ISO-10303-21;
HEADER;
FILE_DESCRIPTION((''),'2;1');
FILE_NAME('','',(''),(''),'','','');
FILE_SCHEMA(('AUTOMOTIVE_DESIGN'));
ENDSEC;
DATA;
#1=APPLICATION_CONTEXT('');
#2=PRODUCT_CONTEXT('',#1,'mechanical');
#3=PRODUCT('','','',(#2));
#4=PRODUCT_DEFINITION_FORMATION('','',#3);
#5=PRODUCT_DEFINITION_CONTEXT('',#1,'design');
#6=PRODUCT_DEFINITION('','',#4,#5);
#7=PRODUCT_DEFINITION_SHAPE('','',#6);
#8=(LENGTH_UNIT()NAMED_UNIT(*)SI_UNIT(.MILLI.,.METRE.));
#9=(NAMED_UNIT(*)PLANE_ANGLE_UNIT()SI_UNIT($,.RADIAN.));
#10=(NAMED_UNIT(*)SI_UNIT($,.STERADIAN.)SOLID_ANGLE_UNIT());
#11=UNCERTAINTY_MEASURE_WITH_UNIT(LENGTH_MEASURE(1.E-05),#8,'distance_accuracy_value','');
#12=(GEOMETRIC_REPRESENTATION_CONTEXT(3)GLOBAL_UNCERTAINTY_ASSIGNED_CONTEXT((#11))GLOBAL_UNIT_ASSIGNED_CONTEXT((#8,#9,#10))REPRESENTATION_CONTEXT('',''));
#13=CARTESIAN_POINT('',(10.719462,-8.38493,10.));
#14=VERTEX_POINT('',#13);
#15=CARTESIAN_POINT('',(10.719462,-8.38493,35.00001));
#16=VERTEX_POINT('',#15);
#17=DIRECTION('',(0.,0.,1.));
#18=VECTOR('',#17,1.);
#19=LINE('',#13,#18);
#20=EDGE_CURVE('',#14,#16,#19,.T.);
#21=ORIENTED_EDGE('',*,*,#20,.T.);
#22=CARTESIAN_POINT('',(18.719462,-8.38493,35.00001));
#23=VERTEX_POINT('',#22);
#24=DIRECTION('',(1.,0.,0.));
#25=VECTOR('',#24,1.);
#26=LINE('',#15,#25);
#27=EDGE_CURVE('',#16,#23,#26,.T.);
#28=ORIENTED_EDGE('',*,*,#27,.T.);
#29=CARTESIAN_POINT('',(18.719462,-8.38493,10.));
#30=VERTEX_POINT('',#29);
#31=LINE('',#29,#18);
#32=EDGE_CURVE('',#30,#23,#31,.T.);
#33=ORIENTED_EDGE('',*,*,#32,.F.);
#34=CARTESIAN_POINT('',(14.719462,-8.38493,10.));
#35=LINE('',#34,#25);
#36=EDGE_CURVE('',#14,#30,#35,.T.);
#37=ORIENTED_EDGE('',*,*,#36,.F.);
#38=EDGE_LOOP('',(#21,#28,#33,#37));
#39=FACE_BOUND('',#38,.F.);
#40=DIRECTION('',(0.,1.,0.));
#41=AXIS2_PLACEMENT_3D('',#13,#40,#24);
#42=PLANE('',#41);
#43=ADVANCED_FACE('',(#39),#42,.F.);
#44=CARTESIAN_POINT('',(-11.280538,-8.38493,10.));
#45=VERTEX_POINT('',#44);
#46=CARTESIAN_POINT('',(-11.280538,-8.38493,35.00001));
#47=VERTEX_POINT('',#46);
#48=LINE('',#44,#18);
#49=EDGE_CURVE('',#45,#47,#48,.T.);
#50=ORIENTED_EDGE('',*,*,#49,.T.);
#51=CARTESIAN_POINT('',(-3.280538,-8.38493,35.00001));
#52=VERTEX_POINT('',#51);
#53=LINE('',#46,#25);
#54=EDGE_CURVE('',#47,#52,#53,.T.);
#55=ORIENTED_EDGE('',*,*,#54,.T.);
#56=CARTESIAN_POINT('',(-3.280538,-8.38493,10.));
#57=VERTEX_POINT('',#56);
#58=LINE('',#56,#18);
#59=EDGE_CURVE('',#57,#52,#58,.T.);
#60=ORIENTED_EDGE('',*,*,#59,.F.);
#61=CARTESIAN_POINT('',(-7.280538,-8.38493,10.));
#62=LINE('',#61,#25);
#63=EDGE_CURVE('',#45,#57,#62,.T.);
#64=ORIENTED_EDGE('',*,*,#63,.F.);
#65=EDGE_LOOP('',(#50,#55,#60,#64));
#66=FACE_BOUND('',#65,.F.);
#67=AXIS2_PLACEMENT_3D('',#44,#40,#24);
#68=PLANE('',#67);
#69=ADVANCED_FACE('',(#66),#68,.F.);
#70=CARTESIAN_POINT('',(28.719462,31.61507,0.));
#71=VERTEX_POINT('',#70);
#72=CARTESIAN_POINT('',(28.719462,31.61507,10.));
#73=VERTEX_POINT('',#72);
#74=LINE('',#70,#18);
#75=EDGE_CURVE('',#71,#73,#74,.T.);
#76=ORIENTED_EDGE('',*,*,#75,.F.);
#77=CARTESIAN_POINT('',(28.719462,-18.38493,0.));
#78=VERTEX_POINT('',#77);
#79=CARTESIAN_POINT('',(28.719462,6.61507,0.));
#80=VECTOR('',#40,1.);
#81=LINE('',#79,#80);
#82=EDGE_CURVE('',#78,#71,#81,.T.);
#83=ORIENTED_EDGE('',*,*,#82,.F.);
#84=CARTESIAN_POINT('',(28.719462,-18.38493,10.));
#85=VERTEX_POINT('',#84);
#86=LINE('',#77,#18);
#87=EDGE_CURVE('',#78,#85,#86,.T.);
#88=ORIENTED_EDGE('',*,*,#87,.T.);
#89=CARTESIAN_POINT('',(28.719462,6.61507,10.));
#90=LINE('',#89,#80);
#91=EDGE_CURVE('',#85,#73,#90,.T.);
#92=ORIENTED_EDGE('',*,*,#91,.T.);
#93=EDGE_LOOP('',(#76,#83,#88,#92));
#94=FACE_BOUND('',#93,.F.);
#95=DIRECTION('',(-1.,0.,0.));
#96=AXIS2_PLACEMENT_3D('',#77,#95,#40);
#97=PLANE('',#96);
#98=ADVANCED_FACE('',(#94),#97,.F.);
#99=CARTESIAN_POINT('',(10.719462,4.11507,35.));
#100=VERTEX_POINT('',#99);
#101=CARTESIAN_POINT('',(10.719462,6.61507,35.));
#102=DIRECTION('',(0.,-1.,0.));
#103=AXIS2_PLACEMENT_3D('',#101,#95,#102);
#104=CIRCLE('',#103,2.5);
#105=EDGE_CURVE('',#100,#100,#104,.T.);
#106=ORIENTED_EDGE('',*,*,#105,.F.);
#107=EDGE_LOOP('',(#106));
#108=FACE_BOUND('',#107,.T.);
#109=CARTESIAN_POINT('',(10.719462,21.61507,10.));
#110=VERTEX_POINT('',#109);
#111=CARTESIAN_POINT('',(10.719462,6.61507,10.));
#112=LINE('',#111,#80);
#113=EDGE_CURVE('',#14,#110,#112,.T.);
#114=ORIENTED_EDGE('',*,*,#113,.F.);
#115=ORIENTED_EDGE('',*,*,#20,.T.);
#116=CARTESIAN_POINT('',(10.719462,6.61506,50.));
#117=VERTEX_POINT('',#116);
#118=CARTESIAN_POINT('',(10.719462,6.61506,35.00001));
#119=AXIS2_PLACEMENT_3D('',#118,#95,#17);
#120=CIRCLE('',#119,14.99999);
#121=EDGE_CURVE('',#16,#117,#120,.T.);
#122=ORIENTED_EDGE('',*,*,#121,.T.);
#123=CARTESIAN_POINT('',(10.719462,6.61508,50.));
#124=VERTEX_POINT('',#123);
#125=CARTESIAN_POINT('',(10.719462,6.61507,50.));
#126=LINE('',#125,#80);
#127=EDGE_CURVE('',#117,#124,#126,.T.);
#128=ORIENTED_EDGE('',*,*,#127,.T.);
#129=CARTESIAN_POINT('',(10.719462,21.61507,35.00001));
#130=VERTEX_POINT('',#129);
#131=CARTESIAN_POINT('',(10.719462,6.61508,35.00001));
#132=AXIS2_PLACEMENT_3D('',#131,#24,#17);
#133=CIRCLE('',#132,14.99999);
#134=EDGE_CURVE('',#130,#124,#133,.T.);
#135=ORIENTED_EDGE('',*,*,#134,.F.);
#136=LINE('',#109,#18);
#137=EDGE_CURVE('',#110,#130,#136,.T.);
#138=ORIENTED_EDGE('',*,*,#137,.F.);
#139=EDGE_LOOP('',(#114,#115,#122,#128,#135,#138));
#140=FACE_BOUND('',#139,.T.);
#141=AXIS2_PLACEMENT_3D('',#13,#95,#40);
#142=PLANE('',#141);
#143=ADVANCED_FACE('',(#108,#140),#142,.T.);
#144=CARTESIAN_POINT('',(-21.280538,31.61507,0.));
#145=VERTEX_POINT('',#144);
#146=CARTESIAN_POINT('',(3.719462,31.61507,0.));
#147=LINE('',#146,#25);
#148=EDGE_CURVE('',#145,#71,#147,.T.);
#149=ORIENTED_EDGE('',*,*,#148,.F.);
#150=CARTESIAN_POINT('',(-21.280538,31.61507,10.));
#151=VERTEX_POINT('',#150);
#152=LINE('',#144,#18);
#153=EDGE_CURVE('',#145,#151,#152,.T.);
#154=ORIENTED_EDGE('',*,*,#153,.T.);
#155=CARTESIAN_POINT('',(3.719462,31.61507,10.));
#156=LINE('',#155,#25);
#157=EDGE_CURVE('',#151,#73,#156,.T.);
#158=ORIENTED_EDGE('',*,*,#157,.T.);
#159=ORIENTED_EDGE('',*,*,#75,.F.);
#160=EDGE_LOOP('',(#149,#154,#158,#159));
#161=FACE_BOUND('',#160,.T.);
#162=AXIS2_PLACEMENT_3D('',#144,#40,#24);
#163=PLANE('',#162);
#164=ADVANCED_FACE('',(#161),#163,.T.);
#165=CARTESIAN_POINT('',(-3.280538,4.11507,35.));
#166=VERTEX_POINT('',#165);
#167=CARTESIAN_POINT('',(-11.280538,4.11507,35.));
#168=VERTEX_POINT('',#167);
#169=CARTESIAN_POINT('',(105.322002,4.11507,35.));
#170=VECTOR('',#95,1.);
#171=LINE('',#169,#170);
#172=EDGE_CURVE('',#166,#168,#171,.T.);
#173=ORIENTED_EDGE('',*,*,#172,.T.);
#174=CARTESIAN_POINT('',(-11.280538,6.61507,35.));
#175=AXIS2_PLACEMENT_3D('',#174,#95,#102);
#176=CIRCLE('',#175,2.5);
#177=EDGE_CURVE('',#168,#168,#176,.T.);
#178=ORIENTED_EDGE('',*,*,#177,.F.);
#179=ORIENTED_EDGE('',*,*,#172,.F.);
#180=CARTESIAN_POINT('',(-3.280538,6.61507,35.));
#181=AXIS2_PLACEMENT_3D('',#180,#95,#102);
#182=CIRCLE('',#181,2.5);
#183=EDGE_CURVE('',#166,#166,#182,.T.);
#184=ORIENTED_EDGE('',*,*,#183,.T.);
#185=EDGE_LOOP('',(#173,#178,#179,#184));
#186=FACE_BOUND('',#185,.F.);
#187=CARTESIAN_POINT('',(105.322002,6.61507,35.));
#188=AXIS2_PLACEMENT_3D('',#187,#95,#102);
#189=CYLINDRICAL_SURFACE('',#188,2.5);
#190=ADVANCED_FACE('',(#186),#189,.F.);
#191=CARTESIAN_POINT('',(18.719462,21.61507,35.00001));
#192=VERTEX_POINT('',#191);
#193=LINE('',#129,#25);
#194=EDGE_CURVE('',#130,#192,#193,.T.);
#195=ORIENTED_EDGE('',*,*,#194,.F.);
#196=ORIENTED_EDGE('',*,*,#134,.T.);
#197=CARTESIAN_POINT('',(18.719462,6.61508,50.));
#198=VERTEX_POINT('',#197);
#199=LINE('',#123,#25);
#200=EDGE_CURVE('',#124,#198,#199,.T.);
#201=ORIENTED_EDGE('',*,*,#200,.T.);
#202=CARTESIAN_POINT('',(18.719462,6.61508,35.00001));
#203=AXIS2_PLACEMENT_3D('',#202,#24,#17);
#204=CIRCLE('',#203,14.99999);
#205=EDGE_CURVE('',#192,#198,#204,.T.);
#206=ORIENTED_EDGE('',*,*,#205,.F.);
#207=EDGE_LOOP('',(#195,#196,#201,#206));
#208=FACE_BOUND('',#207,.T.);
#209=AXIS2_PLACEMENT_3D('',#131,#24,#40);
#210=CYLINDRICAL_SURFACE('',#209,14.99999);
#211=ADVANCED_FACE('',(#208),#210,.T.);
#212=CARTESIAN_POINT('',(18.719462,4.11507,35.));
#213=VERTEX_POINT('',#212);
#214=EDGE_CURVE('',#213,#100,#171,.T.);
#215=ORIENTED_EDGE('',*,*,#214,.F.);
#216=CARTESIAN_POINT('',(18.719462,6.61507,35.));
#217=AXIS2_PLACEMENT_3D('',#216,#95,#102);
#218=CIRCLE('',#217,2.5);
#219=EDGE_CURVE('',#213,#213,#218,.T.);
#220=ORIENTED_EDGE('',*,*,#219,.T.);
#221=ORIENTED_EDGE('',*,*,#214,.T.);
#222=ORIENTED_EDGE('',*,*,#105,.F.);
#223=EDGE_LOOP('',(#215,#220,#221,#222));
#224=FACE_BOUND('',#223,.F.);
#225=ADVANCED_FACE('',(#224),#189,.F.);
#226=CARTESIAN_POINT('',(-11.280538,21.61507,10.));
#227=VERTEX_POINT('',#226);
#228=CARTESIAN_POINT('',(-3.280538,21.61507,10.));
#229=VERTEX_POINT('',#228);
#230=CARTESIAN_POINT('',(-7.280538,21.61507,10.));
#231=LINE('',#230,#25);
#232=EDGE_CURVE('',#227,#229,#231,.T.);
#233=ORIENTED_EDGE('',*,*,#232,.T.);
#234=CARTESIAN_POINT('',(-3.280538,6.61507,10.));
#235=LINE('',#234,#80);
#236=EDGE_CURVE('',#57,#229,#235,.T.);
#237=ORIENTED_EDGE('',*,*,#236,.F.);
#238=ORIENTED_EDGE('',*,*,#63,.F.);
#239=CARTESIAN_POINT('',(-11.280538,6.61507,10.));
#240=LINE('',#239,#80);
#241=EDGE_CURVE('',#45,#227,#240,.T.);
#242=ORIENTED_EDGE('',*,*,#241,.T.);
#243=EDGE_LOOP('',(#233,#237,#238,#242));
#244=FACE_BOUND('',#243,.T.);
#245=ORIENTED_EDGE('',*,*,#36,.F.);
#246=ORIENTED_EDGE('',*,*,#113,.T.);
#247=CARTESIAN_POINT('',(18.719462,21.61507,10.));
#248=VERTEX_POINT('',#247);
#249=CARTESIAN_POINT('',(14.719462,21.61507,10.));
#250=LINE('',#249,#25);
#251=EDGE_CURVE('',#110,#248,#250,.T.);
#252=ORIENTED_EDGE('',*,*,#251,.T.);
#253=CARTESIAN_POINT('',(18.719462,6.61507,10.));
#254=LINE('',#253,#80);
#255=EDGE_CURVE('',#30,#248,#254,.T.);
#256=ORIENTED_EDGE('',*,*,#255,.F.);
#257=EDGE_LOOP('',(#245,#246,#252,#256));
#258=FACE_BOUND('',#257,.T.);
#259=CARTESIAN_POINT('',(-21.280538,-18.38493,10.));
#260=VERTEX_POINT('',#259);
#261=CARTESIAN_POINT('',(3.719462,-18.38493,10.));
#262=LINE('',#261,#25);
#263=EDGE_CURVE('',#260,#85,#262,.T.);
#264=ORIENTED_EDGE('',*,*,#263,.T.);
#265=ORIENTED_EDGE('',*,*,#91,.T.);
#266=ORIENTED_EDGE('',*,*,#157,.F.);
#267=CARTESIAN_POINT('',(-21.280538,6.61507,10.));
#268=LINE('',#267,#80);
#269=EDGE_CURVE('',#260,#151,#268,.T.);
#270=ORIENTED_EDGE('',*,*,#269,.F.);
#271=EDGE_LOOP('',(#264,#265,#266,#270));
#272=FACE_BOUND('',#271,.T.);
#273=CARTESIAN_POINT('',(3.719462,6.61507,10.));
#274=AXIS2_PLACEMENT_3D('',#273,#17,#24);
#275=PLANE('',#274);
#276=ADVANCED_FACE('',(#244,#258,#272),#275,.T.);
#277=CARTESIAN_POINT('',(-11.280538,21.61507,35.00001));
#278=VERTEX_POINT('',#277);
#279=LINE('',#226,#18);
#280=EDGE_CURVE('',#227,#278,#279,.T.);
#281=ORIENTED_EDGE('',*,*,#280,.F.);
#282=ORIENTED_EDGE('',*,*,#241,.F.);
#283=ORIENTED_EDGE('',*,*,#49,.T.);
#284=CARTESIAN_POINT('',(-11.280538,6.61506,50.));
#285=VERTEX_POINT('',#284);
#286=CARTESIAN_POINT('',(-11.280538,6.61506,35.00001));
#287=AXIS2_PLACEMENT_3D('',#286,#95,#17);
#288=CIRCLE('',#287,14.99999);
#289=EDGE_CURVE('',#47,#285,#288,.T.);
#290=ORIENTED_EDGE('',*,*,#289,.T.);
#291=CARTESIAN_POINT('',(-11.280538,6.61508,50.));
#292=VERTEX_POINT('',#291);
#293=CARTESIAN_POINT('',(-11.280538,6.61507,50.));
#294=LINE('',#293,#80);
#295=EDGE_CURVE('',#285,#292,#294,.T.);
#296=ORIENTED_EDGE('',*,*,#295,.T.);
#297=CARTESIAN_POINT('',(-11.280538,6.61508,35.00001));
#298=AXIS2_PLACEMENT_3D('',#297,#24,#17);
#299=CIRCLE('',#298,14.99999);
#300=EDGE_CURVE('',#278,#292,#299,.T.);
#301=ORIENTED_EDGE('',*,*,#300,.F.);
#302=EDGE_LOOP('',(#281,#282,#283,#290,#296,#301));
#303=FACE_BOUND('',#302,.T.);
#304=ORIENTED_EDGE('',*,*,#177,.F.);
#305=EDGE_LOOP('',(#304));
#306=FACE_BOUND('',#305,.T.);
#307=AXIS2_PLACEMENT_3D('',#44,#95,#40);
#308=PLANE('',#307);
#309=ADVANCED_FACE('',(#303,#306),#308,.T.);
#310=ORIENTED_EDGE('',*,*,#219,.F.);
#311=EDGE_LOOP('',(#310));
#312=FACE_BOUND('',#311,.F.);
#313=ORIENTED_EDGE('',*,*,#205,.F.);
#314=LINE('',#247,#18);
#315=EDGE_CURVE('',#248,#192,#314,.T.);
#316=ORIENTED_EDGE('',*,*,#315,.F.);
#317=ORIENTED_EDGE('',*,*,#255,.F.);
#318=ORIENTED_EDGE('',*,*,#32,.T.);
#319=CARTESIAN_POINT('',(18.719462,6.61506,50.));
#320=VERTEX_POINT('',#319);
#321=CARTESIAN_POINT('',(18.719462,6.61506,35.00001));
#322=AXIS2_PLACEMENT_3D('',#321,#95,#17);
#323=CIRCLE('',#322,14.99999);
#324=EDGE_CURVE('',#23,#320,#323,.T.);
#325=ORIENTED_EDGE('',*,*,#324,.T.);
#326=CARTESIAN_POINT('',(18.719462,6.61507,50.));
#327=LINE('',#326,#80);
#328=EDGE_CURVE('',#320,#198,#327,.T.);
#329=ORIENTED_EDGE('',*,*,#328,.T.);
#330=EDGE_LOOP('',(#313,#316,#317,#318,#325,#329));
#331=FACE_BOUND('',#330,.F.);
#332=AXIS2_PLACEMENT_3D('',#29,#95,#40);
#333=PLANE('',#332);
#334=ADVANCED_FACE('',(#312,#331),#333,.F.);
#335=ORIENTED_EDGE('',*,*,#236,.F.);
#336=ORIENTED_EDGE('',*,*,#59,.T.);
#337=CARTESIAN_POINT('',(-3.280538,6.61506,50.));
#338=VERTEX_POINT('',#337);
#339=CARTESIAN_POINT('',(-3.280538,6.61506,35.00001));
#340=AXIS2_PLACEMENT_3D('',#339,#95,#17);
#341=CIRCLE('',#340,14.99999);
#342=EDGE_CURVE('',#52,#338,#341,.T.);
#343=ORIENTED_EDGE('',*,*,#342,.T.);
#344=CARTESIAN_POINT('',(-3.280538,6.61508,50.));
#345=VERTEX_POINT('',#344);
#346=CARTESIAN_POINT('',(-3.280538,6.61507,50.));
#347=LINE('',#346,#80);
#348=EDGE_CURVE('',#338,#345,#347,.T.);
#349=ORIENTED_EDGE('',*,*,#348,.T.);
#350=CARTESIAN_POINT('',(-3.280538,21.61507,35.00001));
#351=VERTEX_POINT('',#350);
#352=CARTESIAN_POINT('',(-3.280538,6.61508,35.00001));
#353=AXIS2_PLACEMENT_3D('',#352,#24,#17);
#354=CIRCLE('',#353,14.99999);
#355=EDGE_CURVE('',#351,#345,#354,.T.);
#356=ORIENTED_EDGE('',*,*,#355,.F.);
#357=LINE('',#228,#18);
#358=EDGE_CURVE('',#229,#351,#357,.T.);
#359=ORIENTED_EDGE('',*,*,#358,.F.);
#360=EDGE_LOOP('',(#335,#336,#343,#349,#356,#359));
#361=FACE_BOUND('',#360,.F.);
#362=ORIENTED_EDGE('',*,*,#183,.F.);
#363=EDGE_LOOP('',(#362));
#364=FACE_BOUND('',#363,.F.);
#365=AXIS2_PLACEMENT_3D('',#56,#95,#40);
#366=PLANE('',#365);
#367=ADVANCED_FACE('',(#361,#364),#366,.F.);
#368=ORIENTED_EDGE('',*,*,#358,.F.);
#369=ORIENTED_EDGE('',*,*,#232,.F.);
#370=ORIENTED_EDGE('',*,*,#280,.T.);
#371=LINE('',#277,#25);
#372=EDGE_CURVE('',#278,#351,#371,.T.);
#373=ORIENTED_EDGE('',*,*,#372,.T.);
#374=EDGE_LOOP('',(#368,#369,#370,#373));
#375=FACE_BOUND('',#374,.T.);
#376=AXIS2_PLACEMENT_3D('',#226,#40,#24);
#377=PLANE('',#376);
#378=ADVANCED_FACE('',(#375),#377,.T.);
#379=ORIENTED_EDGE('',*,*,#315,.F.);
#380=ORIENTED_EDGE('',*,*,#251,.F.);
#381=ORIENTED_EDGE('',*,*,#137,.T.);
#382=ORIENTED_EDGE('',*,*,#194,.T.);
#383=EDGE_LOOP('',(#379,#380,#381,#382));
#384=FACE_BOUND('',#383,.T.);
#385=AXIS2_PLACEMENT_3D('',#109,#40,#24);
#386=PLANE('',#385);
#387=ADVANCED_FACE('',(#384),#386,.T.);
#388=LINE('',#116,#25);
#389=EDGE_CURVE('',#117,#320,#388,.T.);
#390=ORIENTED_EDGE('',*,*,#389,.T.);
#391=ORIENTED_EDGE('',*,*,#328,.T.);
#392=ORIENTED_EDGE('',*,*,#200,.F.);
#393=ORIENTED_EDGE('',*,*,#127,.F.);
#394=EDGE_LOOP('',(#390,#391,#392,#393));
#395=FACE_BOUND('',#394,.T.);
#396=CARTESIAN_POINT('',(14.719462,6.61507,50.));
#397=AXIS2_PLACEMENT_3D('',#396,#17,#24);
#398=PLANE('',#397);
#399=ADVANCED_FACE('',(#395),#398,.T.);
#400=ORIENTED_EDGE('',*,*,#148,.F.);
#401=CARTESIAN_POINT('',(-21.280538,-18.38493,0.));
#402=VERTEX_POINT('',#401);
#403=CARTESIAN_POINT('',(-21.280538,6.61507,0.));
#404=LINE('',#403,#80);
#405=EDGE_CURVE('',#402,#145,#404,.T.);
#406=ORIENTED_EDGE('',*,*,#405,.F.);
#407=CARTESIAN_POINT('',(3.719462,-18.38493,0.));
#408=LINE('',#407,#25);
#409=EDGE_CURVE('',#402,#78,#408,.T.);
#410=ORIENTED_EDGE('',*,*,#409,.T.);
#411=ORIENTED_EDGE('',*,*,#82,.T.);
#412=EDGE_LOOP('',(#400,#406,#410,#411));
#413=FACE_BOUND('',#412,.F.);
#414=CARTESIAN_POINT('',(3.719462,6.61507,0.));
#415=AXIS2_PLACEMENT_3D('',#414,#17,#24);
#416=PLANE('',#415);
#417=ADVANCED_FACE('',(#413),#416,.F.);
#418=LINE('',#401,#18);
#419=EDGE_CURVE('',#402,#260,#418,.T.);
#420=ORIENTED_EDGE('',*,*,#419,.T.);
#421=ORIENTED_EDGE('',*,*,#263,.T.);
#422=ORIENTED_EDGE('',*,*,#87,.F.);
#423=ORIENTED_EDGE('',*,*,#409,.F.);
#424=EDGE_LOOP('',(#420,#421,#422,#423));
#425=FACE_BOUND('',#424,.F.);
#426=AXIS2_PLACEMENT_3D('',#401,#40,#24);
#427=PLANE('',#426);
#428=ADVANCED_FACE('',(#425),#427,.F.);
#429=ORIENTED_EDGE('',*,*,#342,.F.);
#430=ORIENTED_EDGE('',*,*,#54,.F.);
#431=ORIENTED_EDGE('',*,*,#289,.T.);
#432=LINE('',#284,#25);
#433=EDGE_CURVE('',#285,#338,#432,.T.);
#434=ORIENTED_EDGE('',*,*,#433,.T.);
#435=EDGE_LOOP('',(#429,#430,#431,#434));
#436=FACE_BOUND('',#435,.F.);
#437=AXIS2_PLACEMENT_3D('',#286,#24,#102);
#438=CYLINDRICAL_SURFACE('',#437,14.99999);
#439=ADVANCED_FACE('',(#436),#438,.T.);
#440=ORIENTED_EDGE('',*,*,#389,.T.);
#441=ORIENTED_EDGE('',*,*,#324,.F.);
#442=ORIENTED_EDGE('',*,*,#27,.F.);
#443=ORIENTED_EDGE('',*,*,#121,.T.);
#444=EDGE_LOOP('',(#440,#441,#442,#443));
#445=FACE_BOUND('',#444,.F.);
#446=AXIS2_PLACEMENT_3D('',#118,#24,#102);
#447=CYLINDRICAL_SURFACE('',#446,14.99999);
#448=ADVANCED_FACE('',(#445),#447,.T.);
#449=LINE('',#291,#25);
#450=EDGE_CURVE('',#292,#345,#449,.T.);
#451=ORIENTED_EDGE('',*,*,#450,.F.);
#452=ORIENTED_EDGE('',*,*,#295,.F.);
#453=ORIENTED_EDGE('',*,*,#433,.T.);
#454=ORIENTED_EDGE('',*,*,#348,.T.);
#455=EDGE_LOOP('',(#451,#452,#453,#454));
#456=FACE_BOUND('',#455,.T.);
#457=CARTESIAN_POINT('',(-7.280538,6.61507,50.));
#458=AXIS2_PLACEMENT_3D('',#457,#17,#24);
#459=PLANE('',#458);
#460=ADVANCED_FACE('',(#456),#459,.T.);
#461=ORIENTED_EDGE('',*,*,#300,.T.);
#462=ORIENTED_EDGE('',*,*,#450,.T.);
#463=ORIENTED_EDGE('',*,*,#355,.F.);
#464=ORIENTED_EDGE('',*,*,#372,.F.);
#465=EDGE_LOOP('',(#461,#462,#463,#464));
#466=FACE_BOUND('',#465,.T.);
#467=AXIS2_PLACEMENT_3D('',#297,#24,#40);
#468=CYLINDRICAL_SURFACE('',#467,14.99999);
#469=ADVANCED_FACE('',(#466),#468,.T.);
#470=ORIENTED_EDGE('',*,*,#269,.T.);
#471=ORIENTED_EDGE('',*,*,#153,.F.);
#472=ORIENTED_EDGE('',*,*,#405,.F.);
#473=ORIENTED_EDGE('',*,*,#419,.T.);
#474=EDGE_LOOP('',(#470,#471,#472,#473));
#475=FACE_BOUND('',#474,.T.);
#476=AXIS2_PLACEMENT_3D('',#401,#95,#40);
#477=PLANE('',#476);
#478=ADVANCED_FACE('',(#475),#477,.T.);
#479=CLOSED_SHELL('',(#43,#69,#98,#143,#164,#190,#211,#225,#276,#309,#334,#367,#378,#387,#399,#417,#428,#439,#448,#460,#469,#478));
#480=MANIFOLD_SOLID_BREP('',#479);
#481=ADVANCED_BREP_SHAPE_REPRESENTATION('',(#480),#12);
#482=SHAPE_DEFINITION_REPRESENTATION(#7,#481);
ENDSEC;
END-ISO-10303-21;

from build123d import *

# Parameters (mm, degrees)
F0_W     = 50
F0_H     = 50
F1_DEPTH = 10
F2_W     = 8
F2_H     = 30
F3_DEPTH = 40
F4_R     = 14.99999
F6_D     = 5


# Not quite as in the source:
# - a fillet or chamfer is up to 0.001 mm smaller than in the source, because OpenCascade refuses the exact size


with BuildPart() as f1:
    # F0 (on Top) → F1 (new body)
    with BuildSketch(Plane.XY):
        with Locations((3.7194620818, 6.6150704944)):
            Rectangle(F0_W, F0_H)
    extrude(amount=F1_DEPTH)

    # F2 (on face) → F3 (join)
    with BuildSketch(Plane.XY.offset(10)):
        with Locations((-7.2805379182, 6.6150704944)):
            Rectangle(F2_W, F2_H)
        with Locations((14.7194620818, 6.6150704944)):
            Rectangle(F2_W, F2_H)
    extrude(amount=F3_DEPTH)

    # F4 (radius 15 in the source; OpenCascade refuses exactly that, so slightly less here)
    f4_edges = [f1.edges().sort_by_distance(p)[0] for p in [
        (-7.280538, -8.38493, 50),
        (-7.280538, 21.61507, 50),
        (14.719462, -8.38493, 50),
        (14.719462, 21.61507, 50),
    ]]
    fillet(f4_edges, radius=F4_R)

    # F6 (through all)
    with Locations(Plane.YZ.offset(18.7194620818)):
        with Locations((6.6150704944, 35)):
            Hole(F6_D / 2)


solid = f1.part
